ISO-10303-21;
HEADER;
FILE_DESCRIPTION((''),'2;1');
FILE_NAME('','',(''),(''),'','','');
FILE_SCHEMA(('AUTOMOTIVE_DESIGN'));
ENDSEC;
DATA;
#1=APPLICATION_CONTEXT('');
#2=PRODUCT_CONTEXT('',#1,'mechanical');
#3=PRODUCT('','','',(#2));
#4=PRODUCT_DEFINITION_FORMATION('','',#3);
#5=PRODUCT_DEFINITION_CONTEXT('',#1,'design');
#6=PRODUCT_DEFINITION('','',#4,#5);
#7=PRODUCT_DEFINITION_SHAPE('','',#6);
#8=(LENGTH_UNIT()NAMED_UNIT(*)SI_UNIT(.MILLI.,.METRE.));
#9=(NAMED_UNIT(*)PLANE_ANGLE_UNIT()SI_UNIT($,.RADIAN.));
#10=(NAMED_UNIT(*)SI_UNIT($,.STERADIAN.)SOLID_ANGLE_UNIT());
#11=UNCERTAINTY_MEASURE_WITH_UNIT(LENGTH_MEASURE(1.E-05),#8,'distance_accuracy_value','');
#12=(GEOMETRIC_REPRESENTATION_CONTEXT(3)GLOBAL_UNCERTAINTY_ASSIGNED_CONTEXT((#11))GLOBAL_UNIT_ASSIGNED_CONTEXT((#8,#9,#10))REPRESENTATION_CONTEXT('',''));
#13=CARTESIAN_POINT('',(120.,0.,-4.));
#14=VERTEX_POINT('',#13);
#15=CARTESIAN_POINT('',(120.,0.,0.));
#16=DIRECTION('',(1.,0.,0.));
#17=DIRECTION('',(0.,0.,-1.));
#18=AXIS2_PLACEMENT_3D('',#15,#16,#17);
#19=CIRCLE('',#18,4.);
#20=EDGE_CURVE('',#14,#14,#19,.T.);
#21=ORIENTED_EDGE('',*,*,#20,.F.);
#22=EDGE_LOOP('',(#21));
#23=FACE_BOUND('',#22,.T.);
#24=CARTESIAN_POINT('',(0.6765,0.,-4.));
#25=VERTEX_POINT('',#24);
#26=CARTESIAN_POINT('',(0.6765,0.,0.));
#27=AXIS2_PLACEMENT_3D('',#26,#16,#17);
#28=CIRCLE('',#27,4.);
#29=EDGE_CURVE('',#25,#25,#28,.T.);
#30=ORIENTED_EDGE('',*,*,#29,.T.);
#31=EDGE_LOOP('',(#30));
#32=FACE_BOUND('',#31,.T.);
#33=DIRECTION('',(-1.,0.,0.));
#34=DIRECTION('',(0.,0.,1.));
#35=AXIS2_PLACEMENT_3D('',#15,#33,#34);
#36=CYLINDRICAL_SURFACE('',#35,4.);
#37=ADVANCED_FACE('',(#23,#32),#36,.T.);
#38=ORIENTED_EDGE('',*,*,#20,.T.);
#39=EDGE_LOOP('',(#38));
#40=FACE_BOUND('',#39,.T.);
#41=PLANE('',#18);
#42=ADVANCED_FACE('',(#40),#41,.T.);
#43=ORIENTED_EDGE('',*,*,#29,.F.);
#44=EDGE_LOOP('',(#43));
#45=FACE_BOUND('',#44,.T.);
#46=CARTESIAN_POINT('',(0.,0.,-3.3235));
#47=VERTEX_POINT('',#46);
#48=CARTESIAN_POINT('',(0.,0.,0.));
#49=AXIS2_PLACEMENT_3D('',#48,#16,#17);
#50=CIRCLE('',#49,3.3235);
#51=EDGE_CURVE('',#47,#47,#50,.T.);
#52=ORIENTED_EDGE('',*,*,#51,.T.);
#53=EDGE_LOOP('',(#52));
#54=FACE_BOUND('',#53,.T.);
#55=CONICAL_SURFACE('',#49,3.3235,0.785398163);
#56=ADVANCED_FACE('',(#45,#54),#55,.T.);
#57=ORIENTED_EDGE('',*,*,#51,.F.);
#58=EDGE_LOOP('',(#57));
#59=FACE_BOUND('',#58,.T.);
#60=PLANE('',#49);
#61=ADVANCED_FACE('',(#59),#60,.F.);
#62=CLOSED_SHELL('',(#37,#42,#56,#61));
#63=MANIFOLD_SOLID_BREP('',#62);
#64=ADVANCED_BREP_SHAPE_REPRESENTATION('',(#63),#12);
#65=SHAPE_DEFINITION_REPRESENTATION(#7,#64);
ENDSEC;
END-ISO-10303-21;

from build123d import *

# Parameters (mm, degrees)
SKETCH_1_R      = 4
EXTRUDE_1_DEPTH = 120


# Read off the part's stored shape, not the designer's step: M8 机械螺纹 螺柱1
with BuildPart() as part:
    # 草图1 → 凸台-拉伸1 (new body)
    with BuildSketch(Plane(origin=(0, 0, 0), x_dir=(0, 0, -1), z_dir=(1, 0, 0))):
        Circle(SKETCH_1_R)
    extrude(amount=EXTRUDE_1_DEPTH)

    # M8 机械螺纹 螺柱1 outline → M8 机械螺纹 螺柱1 (revolve, cut)
    with BuildSketch(Plane.YX):
        Polygon((4, 0.6765), (3.3235, 0), (4, 0), align=None)
    revolve(axis=Axis((0, 0, 0), (1, 0, 0)), mode=Mode.SUBTRACT)


solid = part.part
